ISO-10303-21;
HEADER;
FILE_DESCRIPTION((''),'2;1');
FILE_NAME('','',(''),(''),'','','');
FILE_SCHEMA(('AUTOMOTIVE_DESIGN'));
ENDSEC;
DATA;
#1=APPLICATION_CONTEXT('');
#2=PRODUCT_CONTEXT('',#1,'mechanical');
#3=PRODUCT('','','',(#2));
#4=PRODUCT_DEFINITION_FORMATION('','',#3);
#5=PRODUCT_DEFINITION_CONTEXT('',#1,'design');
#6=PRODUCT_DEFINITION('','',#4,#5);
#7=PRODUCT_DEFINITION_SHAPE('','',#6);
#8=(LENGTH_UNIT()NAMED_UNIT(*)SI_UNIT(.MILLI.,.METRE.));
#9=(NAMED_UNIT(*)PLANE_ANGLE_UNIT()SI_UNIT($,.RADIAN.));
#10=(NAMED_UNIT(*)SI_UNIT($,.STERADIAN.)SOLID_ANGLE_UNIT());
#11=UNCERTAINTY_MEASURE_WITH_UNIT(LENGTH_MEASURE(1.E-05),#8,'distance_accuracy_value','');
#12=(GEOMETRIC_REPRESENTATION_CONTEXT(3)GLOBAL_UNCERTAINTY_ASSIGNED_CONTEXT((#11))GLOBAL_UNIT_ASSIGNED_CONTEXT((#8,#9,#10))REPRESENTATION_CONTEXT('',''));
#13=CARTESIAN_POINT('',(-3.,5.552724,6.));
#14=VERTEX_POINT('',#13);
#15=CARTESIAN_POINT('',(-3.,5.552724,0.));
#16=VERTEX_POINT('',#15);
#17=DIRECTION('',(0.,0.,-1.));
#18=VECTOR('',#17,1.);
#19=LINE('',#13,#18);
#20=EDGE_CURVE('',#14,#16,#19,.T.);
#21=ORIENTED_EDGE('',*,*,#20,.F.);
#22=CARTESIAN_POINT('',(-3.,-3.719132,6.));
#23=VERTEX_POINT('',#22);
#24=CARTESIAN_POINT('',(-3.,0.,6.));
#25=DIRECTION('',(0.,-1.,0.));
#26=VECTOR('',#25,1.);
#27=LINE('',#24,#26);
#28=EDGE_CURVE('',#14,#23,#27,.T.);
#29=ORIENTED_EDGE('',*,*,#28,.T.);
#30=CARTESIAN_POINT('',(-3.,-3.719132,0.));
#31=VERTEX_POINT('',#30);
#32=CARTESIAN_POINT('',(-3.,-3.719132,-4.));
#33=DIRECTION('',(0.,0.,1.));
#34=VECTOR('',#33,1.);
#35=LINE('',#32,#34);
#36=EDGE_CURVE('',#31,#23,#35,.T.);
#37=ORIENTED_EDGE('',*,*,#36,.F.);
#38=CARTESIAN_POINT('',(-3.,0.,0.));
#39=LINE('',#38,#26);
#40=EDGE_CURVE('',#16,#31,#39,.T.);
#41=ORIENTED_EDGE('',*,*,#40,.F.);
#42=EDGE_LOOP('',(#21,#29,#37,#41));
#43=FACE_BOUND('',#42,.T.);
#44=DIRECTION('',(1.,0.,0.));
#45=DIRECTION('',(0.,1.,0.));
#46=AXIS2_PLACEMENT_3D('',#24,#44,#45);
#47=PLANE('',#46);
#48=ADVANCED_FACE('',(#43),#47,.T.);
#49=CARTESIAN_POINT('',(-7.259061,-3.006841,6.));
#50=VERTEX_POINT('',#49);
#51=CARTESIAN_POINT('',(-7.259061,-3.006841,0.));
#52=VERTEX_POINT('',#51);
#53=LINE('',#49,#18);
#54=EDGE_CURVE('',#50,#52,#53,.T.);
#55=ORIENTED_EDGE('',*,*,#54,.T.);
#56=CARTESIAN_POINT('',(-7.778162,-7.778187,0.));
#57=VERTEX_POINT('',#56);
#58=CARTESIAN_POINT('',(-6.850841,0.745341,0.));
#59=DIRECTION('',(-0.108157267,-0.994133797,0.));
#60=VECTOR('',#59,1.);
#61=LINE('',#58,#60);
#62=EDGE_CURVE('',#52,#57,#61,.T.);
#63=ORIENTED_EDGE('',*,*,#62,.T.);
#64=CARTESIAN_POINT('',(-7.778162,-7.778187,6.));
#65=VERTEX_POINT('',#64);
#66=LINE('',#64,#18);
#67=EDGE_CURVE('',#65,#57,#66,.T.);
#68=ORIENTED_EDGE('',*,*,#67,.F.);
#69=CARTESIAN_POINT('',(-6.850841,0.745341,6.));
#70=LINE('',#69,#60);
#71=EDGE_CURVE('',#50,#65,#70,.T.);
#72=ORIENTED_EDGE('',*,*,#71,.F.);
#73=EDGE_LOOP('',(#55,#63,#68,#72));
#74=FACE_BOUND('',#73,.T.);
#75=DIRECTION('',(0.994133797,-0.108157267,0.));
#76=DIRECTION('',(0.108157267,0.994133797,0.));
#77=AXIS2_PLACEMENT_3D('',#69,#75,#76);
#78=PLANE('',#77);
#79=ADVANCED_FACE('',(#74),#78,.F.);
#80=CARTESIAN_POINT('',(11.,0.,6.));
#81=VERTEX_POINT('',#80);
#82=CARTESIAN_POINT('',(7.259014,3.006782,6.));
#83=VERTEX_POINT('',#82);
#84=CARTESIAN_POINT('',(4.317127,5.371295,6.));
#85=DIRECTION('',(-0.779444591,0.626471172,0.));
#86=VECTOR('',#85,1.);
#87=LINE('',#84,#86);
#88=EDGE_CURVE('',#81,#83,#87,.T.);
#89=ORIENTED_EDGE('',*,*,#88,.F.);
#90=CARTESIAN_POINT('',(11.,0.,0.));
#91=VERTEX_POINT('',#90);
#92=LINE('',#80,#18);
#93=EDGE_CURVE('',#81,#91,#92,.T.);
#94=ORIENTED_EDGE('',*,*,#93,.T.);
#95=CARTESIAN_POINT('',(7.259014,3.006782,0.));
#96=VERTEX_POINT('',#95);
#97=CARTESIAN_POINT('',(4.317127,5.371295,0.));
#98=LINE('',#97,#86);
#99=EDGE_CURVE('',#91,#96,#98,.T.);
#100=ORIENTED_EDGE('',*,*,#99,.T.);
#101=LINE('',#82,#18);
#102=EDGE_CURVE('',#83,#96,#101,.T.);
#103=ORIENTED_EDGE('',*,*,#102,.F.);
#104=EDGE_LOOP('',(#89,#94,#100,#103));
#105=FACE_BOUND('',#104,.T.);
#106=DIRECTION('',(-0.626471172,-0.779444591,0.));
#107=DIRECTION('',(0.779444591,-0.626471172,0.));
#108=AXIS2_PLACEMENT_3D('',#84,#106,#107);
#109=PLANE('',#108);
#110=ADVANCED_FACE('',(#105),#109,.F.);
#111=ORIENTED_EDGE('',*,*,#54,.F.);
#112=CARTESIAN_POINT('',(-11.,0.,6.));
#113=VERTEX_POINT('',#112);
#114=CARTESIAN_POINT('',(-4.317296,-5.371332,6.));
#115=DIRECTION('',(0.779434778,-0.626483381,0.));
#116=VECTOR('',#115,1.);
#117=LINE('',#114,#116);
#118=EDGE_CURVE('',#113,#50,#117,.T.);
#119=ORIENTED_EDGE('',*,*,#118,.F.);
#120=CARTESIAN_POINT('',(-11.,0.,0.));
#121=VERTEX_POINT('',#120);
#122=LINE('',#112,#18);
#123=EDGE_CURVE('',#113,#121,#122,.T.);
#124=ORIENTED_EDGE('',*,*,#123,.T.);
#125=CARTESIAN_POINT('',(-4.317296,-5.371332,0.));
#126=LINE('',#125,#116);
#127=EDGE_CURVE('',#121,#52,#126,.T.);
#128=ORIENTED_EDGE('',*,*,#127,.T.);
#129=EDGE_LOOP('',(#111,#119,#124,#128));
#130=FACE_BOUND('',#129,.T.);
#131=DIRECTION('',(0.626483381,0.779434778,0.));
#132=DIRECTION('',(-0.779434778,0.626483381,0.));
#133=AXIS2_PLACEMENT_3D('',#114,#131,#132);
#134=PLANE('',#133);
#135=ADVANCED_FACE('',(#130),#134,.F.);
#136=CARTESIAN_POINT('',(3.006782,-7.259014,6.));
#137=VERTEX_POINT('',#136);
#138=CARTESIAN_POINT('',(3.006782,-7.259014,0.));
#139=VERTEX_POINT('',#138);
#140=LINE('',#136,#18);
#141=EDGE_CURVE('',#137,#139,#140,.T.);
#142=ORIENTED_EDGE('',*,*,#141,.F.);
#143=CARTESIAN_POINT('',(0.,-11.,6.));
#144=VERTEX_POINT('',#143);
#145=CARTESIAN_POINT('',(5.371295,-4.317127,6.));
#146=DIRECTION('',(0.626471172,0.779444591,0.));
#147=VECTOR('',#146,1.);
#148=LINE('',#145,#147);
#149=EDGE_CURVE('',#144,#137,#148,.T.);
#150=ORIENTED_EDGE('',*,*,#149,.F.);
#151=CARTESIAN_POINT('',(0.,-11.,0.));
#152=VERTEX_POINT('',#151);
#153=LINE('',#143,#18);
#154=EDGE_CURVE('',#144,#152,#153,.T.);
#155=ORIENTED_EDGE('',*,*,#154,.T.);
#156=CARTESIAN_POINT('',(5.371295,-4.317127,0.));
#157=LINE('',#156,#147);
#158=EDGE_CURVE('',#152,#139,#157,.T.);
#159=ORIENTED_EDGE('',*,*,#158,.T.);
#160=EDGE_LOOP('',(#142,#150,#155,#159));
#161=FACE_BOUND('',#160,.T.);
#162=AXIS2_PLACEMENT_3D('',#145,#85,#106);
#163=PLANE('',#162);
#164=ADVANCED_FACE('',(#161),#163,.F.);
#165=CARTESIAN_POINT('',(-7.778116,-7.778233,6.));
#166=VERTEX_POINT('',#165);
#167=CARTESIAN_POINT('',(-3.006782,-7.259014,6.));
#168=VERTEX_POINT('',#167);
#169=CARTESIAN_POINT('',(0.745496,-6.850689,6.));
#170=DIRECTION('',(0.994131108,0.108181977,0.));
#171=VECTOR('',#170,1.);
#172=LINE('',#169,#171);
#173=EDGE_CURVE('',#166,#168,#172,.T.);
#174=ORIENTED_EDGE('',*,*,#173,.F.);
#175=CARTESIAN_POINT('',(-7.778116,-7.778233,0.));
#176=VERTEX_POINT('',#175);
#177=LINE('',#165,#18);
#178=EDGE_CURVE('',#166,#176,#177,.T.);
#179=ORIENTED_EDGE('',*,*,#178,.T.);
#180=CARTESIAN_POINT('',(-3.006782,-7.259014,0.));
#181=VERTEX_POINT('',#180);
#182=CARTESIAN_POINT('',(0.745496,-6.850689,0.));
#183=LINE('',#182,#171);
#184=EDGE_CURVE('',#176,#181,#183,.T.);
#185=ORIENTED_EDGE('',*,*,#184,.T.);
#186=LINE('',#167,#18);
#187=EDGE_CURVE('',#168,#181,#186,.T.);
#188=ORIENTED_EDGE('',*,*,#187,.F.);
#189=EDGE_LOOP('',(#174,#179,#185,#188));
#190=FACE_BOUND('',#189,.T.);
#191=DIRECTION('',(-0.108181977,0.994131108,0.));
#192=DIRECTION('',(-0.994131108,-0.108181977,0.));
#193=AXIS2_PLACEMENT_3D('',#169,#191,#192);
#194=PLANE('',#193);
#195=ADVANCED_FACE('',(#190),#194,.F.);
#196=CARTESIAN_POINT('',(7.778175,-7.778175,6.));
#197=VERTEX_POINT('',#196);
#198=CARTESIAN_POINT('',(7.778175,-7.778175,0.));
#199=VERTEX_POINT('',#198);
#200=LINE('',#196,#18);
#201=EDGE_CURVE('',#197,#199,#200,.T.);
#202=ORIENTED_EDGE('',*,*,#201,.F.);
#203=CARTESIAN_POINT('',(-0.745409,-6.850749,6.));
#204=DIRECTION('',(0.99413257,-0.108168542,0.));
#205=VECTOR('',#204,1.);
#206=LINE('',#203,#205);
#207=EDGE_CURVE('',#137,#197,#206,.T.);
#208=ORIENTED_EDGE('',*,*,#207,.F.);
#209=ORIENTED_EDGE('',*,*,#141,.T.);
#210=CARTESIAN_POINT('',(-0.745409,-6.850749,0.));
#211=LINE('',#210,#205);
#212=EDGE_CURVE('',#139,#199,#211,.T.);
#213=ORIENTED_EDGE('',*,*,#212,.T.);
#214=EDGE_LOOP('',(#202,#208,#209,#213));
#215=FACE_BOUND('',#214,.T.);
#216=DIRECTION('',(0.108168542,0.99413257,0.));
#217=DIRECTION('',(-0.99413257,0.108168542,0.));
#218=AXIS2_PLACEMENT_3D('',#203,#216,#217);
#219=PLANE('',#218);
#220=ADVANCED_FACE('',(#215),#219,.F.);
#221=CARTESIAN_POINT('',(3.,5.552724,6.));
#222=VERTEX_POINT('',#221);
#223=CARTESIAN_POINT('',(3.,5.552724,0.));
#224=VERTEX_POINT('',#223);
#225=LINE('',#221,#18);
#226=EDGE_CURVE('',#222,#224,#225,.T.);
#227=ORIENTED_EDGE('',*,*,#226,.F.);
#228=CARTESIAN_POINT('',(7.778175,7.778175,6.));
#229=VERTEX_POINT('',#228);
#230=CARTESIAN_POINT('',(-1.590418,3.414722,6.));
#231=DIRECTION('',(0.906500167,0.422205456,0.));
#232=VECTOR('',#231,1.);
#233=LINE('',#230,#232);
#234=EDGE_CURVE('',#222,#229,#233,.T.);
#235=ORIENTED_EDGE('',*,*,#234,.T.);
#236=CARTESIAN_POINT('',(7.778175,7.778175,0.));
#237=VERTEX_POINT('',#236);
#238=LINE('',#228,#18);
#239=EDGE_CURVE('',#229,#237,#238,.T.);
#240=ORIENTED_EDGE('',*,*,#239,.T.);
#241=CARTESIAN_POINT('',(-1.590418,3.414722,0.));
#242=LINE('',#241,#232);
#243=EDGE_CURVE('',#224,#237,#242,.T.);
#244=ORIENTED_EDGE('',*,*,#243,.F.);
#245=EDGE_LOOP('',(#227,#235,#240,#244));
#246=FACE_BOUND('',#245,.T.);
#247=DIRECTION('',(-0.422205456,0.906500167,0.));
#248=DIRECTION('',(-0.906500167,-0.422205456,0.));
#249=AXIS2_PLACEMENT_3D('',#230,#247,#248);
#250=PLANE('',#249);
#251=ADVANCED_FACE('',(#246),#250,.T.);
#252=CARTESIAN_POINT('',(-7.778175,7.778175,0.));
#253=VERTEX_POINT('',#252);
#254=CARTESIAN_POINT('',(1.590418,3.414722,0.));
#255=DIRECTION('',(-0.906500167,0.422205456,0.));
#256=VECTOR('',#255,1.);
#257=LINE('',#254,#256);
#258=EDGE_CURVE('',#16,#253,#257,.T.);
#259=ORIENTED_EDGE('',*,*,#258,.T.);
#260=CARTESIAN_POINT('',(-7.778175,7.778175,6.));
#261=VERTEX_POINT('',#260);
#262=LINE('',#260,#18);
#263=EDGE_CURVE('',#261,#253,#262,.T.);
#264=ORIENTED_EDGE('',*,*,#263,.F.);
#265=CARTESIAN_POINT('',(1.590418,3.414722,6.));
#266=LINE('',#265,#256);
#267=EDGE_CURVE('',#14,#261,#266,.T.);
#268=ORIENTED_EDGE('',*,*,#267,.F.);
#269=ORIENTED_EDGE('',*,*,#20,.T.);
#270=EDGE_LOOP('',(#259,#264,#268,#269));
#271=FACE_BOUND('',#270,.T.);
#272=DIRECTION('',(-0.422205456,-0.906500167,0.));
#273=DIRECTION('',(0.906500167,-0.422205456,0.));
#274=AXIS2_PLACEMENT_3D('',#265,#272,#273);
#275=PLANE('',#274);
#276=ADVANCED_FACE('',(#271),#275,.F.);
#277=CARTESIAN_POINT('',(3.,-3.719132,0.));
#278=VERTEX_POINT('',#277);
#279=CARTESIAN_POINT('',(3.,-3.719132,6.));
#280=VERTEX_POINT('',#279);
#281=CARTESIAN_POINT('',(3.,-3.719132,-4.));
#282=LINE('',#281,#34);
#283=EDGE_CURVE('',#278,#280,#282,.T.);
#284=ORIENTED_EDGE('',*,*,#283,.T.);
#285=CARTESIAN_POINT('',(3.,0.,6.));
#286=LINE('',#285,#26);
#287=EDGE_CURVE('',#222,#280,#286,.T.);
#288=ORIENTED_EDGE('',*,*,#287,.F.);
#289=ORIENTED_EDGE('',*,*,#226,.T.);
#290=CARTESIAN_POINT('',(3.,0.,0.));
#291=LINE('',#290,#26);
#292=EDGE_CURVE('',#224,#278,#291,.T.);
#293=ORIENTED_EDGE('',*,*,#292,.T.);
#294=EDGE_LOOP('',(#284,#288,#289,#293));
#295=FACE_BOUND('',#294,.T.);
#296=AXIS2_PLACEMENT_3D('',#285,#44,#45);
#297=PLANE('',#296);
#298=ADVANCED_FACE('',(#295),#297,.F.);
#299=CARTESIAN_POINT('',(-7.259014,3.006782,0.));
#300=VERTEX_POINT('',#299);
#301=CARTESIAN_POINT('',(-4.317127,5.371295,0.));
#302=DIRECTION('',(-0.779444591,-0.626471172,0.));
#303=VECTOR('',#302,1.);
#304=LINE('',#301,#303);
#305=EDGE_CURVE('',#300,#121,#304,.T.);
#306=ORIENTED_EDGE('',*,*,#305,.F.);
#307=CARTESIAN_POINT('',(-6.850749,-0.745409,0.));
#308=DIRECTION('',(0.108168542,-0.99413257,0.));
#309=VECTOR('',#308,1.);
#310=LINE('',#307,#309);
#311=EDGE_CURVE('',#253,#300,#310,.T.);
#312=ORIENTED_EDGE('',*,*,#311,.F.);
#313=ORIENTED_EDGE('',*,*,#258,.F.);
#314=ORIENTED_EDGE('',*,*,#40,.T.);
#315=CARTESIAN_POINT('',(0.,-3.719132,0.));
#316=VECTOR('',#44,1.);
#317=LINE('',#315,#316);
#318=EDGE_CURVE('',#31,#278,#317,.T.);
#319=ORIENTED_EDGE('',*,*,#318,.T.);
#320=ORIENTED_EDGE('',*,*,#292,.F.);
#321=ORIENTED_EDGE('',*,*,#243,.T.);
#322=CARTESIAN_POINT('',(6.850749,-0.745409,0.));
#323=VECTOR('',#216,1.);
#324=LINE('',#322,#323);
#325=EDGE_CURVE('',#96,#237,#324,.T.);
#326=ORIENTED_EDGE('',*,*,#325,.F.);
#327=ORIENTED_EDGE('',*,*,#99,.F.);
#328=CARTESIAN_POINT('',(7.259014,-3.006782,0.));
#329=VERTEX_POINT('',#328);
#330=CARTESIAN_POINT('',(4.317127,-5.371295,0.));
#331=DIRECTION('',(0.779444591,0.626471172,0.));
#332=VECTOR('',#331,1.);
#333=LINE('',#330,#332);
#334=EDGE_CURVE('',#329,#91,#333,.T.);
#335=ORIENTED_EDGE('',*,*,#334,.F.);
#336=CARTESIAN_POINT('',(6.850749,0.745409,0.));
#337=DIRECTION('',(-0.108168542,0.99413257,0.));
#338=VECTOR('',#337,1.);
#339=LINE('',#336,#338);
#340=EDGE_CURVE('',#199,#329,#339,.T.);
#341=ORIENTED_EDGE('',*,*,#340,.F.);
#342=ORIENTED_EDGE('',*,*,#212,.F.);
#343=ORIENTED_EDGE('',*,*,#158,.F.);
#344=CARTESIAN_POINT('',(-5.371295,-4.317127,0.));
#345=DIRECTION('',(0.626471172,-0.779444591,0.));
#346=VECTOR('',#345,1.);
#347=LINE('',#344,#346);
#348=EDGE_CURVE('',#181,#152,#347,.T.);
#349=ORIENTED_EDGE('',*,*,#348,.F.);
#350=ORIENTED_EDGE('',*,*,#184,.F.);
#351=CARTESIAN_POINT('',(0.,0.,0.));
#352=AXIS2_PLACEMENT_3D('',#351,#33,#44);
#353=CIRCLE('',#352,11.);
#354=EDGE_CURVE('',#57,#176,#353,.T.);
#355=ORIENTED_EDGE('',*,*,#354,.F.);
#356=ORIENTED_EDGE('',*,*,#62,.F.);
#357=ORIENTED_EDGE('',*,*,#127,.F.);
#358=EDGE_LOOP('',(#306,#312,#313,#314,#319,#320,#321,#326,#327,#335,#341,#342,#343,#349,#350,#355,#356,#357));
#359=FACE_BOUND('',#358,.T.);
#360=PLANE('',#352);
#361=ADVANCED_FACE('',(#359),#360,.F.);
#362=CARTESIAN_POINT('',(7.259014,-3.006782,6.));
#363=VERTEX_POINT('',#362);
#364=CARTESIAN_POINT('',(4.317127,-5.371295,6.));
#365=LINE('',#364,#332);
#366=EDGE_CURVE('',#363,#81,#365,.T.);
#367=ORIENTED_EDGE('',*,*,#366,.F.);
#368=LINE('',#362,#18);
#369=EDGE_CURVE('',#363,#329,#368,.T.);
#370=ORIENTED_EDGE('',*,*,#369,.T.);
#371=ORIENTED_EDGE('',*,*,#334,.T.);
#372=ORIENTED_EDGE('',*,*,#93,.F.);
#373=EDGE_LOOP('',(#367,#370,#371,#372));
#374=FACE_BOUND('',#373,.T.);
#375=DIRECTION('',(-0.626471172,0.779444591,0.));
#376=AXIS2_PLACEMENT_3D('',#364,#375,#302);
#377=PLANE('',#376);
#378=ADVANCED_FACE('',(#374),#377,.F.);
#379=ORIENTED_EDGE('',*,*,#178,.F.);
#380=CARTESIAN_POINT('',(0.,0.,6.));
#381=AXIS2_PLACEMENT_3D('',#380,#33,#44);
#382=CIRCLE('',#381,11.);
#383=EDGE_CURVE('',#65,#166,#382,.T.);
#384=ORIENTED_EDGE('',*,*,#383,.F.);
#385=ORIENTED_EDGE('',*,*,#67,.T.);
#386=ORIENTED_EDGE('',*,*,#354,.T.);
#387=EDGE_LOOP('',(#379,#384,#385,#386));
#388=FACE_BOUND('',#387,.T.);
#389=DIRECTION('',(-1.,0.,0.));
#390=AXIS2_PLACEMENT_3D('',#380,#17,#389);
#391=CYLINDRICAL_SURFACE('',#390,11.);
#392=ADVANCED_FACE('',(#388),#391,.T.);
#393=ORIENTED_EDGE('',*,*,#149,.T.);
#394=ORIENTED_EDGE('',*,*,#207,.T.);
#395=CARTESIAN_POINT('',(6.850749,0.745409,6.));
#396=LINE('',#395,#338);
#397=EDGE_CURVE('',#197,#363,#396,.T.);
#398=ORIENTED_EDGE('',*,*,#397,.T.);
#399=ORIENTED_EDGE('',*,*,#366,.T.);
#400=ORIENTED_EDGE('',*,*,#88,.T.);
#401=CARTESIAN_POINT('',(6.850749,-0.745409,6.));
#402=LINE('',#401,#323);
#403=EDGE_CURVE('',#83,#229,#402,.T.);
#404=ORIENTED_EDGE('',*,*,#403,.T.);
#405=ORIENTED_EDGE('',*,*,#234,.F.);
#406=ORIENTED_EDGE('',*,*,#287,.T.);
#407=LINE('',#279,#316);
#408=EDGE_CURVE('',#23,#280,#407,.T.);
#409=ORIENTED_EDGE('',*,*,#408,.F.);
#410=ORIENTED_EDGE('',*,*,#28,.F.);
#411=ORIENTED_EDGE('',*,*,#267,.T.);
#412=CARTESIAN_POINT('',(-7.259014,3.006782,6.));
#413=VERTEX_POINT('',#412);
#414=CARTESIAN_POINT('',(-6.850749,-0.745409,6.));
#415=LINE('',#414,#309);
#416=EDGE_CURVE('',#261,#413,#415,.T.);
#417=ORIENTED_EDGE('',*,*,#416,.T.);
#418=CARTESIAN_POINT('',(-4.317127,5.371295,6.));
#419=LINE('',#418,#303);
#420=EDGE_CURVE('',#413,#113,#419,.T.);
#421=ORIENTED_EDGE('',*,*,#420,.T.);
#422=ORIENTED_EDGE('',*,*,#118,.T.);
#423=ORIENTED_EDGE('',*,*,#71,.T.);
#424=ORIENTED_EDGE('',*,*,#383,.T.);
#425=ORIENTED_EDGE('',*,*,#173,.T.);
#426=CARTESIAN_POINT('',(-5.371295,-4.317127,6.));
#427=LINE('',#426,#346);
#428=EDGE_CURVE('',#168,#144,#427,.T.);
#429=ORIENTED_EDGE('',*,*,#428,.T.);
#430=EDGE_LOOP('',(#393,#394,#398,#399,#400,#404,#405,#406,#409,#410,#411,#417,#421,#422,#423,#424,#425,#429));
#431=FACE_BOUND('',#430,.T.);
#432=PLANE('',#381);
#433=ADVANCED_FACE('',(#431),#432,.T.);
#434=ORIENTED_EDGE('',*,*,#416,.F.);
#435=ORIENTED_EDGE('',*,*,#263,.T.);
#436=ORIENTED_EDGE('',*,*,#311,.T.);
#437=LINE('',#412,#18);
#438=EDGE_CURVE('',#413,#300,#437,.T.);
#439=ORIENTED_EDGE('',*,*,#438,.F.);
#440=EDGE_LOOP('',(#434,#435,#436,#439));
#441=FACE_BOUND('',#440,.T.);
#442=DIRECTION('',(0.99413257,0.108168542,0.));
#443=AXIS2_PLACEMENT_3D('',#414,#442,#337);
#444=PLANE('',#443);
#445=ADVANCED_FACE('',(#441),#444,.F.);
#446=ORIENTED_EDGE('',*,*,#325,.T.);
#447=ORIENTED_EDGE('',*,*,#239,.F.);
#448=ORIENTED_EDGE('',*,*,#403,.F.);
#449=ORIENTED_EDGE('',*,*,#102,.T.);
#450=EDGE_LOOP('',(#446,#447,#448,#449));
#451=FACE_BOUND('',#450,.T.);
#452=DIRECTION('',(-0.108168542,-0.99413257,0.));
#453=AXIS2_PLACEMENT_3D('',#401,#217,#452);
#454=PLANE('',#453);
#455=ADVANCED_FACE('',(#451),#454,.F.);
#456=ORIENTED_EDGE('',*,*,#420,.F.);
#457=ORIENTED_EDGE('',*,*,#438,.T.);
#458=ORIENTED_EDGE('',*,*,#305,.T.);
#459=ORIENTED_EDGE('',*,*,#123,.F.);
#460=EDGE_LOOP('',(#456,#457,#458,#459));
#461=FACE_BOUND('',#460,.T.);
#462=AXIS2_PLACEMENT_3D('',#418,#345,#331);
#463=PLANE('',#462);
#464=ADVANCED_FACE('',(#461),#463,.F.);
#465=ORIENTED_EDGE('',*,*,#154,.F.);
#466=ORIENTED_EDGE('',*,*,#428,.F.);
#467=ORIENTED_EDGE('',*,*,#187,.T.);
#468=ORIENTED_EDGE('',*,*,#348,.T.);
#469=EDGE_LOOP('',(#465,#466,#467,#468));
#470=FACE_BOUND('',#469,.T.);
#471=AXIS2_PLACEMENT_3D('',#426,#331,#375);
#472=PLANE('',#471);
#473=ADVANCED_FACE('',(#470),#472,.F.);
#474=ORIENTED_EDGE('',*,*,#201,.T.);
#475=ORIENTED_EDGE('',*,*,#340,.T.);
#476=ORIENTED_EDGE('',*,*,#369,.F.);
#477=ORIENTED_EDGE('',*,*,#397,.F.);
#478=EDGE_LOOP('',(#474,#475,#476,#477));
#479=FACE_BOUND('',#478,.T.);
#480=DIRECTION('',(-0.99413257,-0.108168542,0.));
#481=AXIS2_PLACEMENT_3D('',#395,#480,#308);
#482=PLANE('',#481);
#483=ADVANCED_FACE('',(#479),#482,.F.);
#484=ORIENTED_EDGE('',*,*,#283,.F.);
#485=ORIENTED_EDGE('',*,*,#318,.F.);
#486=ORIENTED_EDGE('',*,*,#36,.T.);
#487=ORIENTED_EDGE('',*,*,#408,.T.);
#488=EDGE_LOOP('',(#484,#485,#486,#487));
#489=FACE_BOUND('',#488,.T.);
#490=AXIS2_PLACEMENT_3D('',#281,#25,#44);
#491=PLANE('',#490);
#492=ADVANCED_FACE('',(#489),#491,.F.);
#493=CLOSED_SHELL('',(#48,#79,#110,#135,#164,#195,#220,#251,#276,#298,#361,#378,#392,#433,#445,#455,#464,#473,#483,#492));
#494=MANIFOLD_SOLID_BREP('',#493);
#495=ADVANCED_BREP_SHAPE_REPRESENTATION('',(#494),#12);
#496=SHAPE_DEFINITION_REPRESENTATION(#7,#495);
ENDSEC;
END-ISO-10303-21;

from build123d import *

# Parameters (mm, degrees)
RESSALTO_EXTRUS_O1_DEPTH = 6
ESBO_O2_W                = 6
ESBO_O2_H                = 6
CORTE_EXTRUS_O1_DEPTH    = 10


with BuildPart() as part:
    # Esboço1 → Ressalto-extrusão1 (new body)
    with BuildSketch(Plane.XY):
        Polygon((3, 2.28086846), (-3, 2.28086846), (-3, 5.552723944), (-7.778174593, 7.778174593), (-7.259013875, 3.006781996), (-11, 0), (-7.259060972, -3.006840593), (-7.778167576, -7.778239077), (-3.006781996, -7.259013875), (0, -11), (3.006781996, -7.259013875), (7.778174593, -7.778174593), (7.259013875, -3.006781996), (11, 0), (7.259013875, 3.006781996), (7.778174593, 7.778174593), (3, 5.552723944), align=None)
    extrude(amount=RESSALTO_EXTRUS_O1_DEPTH)

    # Esboço2 → Corte-extrusão1 (cut)
    with BuildSketch(Plane.XY.offset(6)):
        with Locations((0, -0.71913154)):
            Rectangle(ESBO_O2_W, ESBO_O2_H)
    extrude(amount=-CORTE_EXTRUS_O1_DEPTH, mode=Mode.SUBTRACT)


solid = part.part
